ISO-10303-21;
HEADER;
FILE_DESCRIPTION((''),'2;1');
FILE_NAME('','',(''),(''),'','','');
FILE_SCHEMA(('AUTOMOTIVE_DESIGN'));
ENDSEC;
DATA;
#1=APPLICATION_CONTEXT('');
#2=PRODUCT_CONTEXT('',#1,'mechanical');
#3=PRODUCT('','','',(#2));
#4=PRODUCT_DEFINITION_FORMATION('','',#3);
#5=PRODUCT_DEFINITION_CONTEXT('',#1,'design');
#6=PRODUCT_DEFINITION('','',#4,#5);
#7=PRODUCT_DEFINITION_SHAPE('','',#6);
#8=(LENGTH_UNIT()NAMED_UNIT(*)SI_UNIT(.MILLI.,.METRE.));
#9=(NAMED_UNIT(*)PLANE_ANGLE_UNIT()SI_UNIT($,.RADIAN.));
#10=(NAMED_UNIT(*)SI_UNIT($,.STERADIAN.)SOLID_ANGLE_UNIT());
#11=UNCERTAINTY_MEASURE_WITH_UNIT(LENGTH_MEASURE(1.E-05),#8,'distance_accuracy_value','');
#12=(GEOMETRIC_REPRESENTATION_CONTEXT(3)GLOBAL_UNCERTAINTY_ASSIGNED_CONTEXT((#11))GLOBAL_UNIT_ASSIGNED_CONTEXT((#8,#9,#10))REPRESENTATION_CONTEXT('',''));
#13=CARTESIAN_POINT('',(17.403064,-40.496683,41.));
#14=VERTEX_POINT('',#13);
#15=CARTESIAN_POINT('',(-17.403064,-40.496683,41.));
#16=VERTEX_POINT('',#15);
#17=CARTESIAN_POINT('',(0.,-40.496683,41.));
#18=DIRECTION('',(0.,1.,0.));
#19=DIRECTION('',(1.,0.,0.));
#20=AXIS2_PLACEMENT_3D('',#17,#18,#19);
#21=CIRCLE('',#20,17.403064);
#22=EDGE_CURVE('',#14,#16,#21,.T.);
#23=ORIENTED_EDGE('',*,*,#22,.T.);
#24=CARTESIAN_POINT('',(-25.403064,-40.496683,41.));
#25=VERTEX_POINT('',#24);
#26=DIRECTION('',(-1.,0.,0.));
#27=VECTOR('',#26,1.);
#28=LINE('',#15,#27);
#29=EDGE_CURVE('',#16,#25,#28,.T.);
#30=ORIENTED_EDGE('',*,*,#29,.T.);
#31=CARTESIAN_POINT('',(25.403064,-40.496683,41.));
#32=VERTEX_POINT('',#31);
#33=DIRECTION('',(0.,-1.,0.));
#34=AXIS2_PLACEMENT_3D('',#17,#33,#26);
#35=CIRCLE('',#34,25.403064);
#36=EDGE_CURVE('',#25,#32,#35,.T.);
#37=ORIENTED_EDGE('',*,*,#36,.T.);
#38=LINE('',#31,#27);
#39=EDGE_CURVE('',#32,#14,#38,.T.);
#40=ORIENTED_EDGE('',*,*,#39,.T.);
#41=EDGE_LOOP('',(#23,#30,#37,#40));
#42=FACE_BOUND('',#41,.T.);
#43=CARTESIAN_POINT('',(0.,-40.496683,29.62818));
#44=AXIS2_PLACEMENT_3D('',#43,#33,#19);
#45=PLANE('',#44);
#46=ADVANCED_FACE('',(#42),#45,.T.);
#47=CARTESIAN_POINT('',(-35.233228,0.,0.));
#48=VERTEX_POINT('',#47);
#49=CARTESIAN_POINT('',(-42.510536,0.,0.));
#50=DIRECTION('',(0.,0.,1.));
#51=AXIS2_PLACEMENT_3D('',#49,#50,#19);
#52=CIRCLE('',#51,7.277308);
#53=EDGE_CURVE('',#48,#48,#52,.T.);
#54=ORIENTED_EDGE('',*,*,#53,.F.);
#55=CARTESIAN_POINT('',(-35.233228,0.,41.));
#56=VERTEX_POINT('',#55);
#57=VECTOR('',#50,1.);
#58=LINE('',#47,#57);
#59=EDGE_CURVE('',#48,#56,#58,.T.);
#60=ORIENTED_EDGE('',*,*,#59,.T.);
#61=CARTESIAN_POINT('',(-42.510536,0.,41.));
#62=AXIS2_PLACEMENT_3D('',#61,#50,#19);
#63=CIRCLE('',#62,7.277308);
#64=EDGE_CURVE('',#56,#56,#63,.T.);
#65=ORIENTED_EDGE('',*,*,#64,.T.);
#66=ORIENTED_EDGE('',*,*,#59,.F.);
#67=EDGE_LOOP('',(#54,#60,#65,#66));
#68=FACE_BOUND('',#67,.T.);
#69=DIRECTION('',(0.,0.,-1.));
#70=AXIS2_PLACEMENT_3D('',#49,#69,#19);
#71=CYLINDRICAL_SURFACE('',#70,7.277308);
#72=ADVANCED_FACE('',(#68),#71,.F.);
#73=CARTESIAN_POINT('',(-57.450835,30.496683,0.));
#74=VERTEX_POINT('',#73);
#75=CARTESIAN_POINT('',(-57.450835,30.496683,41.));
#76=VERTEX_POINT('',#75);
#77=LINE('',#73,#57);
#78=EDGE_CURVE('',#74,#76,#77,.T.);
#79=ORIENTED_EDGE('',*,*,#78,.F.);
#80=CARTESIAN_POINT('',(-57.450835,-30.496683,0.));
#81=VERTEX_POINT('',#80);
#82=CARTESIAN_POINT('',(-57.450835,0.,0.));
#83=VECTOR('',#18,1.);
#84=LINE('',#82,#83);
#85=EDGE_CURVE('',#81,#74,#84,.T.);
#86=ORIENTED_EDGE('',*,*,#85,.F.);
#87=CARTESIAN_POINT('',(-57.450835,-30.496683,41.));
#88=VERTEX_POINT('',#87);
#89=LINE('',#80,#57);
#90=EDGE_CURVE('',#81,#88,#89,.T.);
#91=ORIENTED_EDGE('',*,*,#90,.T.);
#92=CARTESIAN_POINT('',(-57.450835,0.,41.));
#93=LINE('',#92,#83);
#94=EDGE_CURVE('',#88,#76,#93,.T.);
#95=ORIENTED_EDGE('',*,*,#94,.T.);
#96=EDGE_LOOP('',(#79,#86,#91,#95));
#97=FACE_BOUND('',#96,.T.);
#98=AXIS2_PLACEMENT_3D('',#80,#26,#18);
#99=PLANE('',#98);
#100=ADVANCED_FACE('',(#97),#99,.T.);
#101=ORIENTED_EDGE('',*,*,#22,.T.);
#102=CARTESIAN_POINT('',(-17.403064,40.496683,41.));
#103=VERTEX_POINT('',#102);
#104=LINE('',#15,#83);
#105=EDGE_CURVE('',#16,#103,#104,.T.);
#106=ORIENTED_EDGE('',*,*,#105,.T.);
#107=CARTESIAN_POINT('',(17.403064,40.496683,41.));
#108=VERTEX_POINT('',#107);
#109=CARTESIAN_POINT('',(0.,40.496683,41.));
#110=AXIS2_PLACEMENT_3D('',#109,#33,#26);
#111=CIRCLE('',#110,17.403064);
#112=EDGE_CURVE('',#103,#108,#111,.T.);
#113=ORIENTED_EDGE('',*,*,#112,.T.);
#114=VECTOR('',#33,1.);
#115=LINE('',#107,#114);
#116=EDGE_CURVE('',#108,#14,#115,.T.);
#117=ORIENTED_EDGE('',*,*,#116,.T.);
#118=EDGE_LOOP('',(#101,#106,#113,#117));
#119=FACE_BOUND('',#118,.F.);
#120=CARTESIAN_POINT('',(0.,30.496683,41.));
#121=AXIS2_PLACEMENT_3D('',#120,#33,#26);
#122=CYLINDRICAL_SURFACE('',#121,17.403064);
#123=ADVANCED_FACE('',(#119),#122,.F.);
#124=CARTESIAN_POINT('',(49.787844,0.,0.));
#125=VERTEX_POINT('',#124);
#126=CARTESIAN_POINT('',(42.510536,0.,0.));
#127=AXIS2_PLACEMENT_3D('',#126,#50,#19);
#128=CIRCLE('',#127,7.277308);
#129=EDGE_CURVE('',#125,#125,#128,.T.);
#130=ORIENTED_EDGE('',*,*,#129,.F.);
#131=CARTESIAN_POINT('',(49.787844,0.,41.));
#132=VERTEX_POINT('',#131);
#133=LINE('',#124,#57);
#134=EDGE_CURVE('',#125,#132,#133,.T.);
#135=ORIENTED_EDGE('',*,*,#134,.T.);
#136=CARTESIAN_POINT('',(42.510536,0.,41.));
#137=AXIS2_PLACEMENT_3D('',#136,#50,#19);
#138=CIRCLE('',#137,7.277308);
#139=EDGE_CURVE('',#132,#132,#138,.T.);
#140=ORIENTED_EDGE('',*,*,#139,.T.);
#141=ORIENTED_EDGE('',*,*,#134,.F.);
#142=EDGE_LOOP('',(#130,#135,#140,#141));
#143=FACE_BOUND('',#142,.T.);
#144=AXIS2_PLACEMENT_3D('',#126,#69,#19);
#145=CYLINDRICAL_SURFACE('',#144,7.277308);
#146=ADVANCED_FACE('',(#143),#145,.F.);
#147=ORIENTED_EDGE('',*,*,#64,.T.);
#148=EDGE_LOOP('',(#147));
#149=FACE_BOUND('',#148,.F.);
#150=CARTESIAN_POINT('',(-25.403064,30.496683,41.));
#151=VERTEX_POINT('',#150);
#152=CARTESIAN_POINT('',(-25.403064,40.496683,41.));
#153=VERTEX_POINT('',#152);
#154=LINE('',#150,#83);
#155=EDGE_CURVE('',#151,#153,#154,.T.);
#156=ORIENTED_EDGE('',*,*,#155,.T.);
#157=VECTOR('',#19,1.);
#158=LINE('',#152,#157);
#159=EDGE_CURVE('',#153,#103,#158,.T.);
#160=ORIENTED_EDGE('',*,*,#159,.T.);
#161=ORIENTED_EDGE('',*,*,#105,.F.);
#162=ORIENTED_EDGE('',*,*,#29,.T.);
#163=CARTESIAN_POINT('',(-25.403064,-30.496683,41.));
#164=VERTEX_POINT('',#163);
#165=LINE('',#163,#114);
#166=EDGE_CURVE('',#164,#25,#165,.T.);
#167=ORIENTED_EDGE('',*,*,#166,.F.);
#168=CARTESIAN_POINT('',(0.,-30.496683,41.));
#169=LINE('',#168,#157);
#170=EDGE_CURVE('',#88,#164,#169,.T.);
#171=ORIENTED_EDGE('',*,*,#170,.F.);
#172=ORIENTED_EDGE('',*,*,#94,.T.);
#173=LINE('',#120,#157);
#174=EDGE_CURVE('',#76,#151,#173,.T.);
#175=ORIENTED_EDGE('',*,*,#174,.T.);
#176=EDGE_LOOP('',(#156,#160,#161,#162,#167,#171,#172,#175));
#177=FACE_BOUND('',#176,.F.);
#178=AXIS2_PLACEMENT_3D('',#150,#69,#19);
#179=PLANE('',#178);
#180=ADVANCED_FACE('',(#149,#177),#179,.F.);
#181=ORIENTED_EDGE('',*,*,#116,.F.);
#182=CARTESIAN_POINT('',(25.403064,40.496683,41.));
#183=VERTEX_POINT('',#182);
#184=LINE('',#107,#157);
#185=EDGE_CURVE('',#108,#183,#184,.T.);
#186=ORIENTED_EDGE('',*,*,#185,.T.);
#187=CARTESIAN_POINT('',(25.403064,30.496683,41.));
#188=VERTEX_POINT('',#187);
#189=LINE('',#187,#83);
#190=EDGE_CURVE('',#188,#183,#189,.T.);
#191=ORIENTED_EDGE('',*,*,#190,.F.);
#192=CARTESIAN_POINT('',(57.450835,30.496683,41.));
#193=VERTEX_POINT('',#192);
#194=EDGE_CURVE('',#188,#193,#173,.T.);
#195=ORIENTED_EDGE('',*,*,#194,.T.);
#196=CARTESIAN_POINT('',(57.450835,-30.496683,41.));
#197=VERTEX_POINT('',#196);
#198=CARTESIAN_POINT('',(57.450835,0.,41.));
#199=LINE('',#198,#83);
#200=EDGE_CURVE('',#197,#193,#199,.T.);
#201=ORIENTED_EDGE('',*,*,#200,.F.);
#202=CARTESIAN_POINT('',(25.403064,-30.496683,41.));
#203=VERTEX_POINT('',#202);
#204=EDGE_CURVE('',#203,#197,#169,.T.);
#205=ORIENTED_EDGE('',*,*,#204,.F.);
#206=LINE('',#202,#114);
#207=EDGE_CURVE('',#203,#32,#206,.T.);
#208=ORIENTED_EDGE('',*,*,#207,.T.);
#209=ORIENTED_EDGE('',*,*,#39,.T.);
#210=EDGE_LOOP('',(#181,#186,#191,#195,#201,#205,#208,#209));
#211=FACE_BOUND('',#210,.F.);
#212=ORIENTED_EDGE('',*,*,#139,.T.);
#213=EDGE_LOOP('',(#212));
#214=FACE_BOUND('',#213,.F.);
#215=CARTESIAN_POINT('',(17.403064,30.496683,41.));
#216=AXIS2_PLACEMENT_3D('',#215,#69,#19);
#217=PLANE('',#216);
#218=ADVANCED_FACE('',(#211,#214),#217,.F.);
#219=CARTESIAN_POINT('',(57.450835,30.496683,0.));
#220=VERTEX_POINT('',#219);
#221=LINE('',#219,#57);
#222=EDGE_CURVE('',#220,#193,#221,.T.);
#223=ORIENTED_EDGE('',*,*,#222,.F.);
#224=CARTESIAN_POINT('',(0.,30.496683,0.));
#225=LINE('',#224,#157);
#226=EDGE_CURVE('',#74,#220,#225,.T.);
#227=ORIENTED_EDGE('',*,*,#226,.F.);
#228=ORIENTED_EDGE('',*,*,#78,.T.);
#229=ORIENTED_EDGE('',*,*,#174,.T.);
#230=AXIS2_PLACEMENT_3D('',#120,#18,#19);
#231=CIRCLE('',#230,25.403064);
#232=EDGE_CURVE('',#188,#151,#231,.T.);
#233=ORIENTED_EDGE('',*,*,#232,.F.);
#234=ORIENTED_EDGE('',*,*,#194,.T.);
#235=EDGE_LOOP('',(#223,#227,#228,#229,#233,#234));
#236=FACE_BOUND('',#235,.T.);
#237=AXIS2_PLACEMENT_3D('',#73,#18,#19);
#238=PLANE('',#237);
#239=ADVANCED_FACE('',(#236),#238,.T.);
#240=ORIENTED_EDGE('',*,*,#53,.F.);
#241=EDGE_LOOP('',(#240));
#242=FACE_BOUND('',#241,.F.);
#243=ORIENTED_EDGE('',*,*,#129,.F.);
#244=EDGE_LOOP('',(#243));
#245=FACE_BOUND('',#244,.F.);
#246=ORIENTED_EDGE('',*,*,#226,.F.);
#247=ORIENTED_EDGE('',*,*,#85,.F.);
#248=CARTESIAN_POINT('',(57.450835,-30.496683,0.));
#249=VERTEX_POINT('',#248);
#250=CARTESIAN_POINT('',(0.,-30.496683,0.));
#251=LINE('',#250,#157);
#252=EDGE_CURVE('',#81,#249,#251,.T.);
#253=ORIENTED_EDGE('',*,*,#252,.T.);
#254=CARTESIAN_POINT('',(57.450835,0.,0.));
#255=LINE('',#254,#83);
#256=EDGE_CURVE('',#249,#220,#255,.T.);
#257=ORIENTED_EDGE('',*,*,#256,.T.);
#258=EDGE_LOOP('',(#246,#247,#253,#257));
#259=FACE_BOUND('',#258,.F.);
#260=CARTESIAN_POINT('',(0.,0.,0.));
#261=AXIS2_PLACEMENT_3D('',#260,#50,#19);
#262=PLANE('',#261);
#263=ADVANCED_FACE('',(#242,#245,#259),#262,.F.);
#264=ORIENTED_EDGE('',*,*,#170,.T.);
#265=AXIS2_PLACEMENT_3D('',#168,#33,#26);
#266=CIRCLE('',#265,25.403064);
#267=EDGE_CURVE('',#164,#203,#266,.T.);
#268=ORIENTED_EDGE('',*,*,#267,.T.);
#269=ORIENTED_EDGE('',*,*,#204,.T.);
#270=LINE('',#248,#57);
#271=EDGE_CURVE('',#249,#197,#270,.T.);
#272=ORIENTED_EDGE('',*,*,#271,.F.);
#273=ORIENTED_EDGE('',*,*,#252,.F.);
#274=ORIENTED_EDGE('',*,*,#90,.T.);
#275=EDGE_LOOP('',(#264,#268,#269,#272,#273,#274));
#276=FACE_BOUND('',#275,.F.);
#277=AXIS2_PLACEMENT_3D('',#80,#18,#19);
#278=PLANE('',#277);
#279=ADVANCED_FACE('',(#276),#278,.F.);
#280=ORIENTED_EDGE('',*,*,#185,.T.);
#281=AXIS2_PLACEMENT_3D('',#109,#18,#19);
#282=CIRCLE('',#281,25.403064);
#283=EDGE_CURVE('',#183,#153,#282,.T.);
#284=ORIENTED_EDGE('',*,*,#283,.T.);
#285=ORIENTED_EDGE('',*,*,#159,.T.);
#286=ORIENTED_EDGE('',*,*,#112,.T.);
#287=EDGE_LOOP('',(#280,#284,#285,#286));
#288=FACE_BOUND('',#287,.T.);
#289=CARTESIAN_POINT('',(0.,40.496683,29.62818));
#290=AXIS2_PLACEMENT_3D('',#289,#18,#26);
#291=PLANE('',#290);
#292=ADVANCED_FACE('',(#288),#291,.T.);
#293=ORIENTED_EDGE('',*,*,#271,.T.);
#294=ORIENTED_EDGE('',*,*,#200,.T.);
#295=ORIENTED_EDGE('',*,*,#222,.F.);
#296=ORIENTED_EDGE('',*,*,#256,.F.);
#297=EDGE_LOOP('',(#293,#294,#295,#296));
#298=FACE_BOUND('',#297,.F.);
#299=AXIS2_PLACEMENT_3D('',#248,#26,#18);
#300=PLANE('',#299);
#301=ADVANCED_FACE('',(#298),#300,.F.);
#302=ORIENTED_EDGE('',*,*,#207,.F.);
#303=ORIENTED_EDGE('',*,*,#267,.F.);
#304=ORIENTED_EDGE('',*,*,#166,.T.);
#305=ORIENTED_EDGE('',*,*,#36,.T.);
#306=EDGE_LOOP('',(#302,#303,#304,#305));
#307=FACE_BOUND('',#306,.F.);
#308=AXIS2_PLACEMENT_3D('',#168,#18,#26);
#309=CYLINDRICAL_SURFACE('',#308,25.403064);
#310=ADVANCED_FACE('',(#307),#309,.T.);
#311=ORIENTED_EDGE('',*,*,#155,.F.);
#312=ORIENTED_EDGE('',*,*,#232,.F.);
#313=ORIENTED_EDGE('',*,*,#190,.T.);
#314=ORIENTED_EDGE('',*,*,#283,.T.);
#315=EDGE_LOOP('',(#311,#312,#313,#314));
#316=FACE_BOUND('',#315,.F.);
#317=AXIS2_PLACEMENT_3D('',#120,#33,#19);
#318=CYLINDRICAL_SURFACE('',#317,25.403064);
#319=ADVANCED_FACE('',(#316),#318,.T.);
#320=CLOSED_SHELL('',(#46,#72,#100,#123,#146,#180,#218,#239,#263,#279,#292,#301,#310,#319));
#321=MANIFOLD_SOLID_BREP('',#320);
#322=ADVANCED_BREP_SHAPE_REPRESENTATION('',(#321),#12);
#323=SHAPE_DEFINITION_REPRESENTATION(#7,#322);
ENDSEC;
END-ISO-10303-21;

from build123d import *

# Parameters (mm, degrees)
F0_W     = 114.9016693234
F0_H     = 60.9933659434
F0_R     = 7.2773079639
F1_DEPTH = 41
F3_DEPTH = 60.9943659434
F4_DEPTH = 10
F6_DEPTH = 10


with BuildPart() as f1:
    # F0 (on Top) → F1 (new body)
    with BuildSketch(Plane.XY):
        Rectangle(F0_W, F0_H)
        with Locations((-42.510535568, 0)):
            Circle(F0_R, mode=Mode.SUBTRACT)
        with Locations((42.510535568, 0)):
            Circle(F0_R, mode=Mode.SUBTRACT)
    extrude(amount=F1_DEPTH)

    # F2 (on face) → F3 (cut, through all)
    with BuildSketch(Plane.XZ.offset(30.4966829717)):
        with BuildLine():
            ThreePointArc((-17.4030642732, 41), (0, 23.5969357268), (17.4030642732, 41))
            Line((17.4030642732, 41), (-17.4030642732, 41))
        make_face()
    extrude(amount=-F3_DEPTH, mode=Mode.SUBTRACT)

    # F2 (on face) → F4 (join)
    with BuildSketch(Plane.XZ.offset(30.4966829717)):
        with BuildLine():
            Line((25.4030636924, 41), (17.4030642732, 41))
            ThreePointArc((17.4030642732, 41), (0, 23.5969357268), (-17.4030642732, 41))
            Line((-17.4030642732, 41), (-25.4030636924, 41))
            ThreePointArc((-25.4030636924, 41), (0, 15.5969363076), (25.4030636924, 41))
        make_face()
    extrude(amount=F4_DEPTH)

    # F5 (on face) → F6 (join)
    with BuildSketch(Plane(origin=(0, 30.4966829717, 0), x_dir=(-1, 0, 0), z_dir=(0, 1, 0))):
        with BuildLine():
            ThreePointArc((-25.4030636924, 41), (0, 15.5969363076), (25.4030636924, 41))
            Line((25.4030636924, 41), (17.4030642732, 41))
            ThreePointArc((17.4030642732, 41), (0, 23.5969357268), (-17.4030642732, 41))
            Line((-17.4030642732, 41), (-25.4030636924, 41))
        make_face()
    extrude(amount=F6_DEPTH)


solid = f1.part
